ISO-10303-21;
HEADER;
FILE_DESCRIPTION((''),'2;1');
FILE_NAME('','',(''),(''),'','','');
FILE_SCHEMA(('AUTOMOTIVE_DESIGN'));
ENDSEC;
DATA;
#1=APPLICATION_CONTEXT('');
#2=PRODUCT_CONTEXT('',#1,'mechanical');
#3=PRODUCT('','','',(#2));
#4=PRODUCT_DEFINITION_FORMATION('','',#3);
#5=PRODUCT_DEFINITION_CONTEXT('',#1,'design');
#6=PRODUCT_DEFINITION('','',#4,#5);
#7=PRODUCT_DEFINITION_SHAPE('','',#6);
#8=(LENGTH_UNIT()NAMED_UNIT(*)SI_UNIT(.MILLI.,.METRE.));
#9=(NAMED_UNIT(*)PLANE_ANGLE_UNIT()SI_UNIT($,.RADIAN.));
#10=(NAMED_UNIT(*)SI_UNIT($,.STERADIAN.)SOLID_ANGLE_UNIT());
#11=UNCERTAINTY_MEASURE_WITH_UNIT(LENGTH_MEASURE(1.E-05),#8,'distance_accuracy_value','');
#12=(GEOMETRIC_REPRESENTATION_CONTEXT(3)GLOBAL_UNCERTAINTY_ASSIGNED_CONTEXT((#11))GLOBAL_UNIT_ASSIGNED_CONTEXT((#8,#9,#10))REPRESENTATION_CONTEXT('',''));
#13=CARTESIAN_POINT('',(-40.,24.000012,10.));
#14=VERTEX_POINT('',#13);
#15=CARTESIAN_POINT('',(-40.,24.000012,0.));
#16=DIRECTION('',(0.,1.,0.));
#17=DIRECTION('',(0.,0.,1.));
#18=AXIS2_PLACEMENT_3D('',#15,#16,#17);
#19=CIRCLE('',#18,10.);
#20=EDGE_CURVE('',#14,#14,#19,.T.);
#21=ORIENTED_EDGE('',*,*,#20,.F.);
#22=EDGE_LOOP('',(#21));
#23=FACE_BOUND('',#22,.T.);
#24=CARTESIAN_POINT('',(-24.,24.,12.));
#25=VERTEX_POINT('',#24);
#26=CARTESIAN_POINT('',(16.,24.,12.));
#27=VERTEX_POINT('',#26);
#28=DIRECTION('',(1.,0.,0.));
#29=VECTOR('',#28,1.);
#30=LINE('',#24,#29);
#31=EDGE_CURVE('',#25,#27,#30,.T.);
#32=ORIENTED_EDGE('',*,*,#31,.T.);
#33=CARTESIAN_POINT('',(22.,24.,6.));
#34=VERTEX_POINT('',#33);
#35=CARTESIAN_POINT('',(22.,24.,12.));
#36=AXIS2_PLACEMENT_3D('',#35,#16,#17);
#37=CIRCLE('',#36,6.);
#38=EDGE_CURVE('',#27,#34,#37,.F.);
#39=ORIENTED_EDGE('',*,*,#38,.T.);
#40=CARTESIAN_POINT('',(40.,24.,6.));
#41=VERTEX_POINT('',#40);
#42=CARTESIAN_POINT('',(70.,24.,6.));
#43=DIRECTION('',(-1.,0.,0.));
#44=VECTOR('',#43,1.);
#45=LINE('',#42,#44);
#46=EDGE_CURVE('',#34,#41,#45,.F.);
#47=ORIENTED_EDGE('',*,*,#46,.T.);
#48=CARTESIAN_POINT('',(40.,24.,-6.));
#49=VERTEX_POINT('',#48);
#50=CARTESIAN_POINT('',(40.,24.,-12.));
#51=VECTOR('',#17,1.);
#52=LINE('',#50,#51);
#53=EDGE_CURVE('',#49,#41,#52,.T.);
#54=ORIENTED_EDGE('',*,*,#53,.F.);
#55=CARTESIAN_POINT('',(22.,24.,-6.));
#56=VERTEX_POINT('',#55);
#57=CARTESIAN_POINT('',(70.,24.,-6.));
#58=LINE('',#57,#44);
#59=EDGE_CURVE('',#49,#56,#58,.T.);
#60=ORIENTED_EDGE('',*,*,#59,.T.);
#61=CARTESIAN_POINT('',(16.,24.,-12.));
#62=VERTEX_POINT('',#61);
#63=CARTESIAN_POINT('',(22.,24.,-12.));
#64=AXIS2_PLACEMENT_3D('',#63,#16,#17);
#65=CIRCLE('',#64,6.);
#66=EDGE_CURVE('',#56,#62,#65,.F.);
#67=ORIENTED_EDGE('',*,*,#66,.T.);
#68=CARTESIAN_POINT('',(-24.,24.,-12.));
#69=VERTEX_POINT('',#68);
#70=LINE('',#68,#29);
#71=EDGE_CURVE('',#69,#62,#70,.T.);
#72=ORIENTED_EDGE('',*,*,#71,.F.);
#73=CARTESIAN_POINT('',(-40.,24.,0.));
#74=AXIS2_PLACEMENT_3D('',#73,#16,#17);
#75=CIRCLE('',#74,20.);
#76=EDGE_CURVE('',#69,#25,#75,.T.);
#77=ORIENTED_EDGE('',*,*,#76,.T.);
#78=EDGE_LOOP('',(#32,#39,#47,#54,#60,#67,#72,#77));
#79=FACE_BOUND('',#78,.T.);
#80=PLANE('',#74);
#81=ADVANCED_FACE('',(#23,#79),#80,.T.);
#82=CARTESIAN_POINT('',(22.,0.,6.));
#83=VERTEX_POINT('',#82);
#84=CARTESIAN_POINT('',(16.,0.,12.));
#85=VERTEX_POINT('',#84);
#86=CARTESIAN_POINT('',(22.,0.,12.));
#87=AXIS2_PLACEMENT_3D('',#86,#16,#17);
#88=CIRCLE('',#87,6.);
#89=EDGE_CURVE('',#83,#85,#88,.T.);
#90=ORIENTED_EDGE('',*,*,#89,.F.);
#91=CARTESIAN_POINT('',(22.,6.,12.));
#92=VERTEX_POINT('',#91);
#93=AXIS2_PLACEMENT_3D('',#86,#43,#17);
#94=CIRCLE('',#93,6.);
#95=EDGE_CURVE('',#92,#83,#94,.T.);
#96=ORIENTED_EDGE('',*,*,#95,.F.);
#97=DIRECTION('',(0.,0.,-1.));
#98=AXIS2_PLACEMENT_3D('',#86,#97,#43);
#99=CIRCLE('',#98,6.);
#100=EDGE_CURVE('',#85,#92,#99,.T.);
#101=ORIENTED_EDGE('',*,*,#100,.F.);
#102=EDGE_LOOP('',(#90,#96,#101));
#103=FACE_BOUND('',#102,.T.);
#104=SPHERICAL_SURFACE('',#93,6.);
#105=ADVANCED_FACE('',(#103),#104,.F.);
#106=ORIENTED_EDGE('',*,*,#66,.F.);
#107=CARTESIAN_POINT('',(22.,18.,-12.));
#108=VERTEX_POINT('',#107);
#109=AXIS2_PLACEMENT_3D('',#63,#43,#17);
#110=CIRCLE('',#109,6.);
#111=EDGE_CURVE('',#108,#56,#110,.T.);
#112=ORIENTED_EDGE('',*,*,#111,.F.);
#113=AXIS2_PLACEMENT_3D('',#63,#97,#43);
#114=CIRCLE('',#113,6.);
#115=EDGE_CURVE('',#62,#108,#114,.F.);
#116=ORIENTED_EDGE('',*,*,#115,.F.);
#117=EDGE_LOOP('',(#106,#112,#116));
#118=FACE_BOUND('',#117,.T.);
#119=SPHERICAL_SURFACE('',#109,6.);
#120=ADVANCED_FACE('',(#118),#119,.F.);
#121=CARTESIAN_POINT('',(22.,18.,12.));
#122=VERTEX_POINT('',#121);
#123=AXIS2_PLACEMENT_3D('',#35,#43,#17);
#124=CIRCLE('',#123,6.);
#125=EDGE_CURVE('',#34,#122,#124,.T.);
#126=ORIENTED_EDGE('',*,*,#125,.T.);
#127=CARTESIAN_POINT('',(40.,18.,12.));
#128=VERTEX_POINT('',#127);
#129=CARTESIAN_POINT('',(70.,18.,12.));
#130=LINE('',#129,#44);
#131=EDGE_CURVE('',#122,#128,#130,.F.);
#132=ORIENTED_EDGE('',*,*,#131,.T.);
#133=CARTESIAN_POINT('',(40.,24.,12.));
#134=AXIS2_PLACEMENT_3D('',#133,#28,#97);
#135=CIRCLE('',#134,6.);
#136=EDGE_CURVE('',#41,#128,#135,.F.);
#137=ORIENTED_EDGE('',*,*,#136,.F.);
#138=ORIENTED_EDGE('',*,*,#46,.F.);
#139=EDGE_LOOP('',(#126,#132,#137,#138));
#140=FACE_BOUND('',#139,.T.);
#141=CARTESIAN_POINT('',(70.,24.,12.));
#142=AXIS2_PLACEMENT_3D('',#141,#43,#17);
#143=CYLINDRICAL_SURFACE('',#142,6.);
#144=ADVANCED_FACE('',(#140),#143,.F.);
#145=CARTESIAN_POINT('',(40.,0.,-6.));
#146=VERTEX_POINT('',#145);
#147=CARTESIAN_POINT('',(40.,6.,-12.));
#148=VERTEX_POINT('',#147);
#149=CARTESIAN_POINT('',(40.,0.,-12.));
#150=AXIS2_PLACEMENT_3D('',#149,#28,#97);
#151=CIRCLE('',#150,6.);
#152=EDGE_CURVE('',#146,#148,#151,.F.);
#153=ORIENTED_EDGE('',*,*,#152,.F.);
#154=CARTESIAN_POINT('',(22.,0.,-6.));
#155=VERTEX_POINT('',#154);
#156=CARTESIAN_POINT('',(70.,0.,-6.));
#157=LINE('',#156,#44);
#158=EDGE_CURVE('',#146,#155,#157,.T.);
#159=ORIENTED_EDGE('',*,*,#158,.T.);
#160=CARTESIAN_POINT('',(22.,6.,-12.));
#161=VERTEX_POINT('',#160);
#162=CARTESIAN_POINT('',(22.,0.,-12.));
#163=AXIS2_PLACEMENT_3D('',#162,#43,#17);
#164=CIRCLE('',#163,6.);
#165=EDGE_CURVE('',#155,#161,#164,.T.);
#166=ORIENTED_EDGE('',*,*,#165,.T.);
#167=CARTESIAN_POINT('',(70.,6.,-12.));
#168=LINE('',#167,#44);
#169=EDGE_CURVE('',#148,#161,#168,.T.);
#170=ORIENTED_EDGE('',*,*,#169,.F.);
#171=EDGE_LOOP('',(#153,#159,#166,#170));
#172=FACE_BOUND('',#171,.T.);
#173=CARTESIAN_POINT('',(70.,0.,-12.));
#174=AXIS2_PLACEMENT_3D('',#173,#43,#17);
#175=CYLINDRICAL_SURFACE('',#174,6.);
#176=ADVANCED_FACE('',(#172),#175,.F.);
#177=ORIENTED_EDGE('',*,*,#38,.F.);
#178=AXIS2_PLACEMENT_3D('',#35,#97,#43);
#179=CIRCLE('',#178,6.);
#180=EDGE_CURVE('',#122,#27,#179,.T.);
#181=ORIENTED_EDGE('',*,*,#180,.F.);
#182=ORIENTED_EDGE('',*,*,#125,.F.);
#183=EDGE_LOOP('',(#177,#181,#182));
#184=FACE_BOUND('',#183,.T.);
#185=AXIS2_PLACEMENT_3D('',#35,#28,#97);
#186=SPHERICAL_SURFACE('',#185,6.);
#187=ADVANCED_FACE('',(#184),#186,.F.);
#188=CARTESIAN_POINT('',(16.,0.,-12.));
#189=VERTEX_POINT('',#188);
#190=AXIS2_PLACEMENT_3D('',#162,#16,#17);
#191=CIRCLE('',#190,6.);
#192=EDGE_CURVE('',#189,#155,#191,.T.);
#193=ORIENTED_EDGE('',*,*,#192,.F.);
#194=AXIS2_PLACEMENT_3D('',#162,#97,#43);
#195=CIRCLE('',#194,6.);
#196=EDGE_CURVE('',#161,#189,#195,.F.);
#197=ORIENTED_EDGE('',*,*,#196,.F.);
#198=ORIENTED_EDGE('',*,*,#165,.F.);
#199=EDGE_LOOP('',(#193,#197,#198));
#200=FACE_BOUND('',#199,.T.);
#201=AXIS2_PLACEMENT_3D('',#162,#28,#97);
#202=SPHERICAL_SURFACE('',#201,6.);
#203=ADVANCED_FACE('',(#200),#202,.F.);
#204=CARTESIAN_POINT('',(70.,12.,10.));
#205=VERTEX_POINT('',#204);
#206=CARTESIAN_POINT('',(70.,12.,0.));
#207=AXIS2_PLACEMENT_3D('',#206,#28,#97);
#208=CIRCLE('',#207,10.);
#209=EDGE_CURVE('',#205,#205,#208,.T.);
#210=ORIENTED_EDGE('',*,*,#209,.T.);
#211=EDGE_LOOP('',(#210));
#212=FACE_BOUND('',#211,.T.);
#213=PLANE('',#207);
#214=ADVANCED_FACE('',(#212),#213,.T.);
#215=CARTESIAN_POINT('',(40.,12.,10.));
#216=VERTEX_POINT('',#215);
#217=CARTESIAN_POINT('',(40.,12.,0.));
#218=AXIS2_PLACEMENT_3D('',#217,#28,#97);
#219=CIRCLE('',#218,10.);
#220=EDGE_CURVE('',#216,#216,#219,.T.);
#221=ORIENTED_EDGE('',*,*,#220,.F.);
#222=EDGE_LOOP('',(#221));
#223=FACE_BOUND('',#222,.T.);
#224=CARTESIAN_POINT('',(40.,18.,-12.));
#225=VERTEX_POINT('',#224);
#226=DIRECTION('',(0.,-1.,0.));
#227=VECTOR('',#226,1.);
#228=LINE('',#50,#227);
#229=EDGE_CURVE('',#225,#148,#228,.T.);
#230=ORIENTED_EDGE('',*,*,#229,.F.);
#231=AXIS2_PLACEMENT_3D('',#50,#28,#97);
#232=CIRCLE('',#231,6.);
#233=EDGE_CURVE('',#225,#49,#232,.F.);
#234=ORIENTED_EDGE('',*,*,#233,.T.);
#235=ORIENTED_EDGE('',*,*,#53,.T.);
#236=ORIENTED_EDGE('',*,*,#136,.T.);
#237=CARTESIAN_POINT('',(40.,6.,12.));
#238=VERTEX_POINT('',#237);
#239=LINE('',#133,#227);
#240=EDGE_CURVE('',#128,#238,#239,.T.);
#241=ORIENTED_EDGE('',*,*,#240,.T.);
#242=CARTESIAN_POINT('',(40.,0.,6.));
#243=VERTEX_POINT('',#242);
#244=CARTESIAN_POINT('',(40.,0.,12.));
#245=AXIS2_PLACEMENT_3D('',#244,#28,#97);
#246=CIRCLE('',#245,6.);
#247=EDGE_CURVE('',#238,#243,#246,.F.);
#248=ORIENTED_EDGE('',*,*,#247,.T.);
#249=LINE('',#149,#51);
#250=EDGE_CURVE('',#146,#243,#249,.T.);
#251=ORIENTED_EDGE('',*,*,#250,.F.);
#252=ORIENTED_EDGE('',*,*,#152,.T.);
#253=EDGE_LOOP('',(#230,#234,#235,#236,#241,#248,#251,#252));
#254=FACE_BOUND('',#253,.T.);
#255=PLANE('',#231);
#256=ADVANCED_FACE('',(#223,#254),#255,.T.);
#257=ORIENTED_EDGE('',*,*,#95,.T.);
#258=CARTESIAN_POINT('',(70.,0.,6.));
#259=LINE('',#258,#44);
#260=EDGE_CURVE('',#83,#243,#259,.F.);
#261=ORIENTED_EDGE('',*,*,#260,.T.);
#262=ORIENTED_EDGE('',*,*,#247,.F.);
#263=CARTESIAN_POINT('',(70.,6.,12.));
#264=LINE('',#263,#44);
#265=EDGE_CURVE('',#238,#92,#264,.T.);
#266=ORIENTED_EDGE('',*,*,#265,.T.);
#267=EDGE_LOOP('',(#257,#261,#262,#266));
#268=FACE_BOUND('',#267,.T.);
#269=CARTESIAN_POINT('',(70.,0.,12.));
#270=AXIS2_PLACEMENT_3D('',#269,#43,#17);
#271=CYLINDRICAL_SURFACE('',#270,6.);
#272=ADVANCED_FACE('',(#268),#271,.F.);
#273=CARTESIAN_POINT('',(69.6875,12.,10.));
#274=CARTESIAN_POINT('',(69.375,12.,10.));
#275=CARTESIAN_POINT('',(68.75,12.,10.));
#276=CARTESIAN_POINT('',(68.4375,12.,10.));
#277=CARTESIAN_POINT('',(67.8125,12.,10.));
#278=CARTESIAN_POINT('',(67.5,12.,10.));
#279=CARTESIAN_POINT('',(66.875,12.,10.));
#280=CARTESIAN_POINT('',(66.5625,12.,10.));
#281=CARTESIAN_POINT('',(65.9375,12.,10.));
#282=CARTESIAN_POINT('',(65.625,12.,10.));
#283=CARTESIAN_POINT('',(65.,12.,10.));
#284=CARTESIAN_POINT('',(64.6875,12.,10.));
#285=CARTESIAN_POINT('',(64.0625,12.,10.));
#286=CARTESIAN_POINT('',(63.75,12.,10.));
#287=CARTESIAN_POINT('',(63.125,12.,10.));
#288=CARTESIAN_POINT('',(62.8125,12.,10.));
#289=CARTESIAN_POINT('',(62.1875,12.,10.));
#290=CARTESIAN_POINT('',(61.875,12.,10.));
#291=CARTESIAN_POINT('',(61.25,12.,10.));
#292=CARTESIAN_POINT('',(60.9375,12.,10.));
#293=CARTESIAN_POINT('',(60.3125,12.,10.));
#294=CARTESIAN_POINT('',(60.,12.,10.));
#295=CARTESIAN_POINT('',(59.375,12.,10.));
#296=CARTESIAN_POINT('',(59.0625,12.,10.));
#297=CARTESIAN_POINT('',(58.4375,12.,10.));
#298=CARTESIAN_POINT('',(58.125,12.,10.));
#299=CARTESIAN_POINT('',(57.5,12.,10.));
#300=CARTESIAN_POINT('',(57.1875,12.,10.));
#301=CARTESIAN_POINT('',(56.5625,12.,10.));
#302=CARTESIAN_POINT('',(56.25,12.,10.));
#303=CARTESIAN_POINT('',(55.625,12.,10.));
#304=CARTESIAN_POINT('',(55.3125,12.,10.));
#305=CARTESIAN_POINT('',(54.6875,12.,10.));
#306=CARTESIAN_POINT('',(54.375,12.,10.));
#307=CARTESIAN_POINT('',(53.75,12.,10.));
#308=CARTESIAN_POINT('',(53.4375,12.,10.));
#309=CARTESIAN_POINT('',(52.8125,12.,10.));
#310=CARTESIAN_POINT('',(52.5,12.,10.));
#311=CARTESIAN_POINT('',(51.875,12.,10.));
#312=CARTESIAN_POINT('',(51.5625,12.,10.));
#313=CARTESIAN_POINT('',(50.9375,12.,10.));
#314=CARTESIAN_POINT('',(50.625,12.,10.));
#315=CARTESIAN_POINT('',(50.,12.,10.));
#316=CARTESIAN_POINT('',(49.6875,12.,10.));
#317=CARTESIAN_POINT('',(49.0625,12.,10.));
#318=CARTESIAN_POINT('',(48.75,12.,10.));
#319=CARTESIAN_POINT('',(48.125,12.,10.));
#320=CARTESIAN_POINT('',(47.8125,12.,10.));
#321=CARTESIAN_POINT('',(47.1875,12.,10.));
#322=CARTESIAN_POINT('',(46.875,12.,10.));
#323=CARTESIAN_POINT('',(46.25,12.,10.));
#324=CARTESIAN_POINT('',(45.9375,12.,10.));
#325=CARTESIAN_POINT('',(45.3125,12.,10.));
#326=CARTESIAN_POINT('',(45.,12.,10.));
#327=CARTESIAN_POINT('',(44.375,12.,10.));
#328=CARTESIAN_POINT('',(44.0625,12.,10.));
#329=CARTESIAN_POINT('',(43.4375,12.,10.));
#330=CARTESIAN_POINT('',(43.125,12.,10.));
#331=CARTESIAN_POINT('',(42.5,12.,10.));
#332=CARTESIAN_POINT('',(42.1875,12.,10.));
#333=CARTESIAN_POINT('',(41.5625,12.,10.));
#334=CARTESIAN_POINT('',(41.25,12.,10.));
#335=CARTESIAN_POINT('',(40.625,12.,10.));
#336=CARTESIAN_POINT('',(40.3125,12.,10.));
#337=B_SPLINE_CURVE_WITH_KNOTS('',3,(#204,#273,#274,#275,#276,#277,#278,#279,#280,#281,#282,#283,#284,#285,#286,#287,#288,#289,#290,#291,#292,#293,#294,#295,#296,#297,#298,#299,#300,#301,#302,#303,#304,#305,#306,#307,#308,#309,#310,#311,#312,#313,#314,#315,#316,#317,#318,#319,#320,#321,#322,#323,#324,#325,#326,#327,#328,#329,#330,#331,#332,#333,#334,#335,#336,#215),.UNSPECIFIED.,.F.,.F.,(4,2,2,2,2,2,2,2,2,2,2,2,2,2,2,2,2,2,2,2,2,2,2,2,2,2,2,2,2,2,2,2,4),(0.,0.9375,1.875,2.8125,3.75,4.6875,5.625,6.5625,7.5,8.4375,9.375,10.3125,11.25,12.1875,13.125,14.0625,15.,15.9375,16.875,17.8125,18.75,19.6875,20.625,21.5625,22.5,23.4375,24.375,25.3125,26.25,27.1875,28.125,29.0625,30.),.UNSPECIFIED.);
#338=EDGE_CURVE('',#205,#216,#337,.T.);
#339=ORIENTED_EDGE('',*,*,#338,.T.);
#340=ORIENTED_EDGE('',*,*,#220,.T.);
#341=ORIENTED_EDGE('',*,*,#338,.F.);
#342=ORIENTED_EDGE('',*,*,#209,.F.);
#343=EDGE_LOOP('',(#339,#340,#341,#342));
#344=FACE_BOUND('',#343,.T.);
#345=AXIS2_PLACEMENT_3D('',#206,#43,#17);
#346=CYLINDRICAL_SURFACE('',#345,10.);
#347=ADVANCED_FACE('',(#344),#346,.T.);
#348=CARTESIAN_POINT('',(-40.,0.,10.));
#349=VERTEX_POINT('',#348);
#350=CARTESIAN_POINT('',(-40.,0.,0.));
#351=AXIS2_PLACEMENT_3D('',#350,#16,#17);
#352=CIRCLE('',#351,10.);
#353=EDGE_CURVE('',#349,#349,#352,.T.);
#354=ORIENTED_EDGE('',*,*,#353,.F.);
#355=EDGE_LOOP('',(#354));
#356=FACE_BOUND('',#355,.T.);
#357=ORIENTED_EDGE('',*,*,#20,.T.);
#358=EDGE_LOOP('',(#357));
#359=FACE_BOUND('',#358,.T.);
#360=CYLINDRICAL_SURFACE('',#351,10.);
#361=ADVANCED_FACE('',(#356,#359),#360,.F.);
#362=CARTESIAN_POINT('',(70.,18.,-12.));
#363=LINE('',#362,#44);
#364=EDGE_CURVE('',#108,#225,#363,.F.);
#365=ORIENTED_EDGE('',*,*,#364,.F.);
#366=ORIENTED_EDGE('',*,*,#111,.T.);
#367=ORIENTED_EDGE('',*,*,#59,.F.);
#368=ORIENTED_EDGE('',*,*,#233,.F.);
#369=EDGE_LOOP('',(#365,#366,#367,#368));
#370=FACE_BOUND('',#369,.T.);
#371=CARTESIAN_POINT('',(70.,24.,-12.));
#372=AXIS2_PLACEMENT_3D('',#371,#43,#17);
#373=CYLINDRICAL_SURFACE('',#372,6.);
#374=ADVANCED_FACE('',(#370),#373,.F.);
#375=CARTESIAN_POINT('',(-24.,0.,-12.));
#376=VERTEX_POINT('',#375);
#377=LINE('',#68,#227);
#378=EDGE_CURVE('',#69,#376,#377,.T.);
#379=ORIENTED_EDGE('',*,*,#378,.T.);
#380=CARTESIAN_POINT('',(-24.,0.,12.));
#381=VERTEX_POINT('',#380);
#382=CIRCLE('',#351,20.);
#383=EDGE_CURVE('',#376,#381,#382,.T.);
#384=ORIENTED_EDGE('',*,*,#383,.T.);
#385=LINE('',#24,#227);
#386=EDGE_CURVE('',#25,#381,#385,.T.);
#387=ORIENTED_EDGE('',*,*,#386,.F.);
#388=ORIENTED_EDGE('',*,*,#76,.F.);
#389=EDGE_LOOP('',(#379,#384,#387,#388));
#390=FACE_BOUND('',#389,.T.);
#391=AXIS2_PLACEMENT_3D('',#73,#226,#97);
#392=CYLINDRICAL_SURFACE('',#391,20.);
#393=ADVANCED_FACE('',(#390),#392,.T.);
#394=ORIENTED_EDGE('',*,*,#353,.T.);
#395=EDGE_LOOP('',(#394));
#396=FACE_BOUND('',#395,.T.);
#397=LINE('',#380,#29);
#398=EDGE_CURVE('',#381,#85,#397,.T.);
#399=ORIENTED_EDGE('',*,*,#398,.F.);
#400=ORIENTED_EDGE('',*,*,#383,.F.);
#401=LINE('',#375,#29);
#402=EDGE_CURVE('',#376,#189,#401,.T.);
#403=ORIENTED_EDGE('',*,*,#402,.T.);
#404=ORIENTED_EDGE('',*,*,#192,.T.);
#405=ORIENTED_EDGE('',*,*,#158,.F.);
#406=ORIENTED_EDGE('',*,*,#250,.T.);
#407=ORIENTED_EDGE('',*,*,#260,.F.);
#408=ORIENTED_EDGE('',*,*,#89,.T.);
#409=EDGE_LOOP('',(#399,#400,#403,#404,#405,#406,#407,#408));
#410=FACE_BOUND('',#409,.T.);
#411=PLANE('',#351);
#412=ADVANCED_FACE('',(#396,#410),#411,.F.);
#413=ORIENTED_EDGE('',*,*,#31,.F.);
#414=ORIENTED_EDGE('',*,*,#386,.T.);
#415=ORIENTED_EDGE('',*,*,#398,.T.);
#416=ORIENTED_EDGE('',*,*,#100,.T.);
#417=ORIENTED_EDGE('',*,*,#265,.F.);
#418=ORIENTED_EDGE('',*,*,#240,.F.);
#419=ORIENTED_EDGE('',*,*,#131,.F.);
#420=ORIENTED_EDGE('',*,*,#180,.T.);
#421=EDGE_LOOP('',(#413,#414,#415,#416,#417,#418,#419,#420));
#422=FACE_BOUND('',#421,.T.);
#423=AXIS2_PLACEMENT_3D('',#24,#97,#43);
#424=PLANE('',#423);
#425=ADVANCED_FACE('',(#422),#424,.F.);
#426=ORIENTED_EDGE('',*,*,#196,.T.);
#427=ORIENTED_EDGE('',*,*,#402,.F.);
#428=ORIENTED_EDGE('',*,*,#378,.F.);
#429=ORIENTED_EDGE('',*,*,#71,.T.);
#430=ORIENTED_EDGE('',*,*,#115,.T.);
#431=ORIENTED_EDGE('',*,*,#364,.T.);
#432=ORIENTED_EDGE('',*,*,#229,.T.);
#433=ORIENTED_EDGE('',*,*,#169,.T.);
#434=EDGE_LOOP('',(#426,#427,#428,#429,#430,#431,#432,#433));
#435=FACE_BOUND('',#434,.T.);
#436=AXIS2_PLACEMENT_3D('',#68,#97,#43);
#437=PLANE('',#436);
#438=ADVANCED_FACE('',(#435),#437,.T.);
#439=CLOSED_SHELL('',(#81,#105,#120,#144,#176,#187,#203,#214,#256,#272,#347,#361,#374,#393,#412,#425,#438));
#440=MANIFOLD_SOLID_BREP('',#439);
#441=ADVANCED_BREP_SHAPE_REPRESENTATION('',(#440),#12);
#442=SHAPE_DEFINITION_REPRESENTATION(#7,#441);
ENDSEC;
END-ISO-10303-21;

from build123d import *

# Parameters (mm, degrees)
BOSS_EXTRUDE1_DEPTH     = 24
SKETCH3_R               = 10
BOSS_EXTRUDE2_DEPTH     = 30
CUT_EXTRUDE1_DEPTH      = 77.655071587
CUT_EXTRUDE1_DEPTH_BACK = 77.655071587
SKETCH4_R               = 10
CUT_EXTRUDE2_DEPTH      = 105.76640683
CUT_EXTRUDE2_DEPTH_BACK = 24
SKETCH7_R               = 6
FILLET3_R               = 6


with BuildPart() as part:
    # Sketch2 → Boss-Extrude1 (new body)
    with BuildSketch(Plane(origin=(0, 0, 0), x_dir=(1, 0, 0), z_dir=(0, 1, 0))):
        with BuildLine():
            Line((-24, 12), (40, 12))
            Line((40, 12), (40, -12))
            Line((40, -12), (-24, -12))
            ThreePointArc((-24, -12), (-60, 0), (-24, 12))
        make_face()
    extrude(amount=BOSS_EXTRUDE1_DEPTH)

    # Sketch3 → Boss-Extrude2 (add)
    with BuildSketch(Plane(origin=(40, 0, 0), x_dir=(0, 0, -1), z_dir=(1, 0, 0))):
        with Locations((0, 12)):
            Circle(SKETCH3_R)
    extrude(amount=BOSS_EXTRUDE2_DEPTH)

    # Sketch4 → Cut-Extrude1 (cut, two sides: drawn at the far end of the back side and taken through both)
    with BuildSketch(Plane(origin=(0, 24, 0), x_dir=(1, 0, 0), z_dir=(0, 1, 0)).offset(-CUT_EXTRUDE1_DEPTH_BACK)):
        with Locations(Location((-40, 0, 0), (0, 0, 270))):
            Circle(SKETCH4_R)
    extrude(amount=CUT_EXTRUDE1_DEPTH + CUT_EXTRUDE1_DEPTH_BACK, mode=Mode.SUBTRACT)

    # Sketch7 → Cut-Extrude2 (cut, two sides: drawn at the far end of the back side and taken through both)
    with BuildSketch(Plane(origin=(40, 0, 0), x_dir=(0, 0, -1), z_dir=(1, 0, 0)).offset(-CUT_EXTRUDE2_DEPTH_BACK)):
        with Locations((-12, 24)):
            Circle(SKETCH7_R)
        with Locations((12, 24)):
            Circle(SKETCH7_R)
        with Locations((12, 0)):
            Circle(SKETCH7_R)
        with Locations((-12, 0)):
            Circle(SKETCH7_R)
    extrude(amount=CUT_EXTRUDE2_DEPTH + CUT_EXTRUDE2_DEPTH_BACK, mode=Mode.SUBTRACT)

    # Fillet3
    fillet3_edges = [part.edges().sort_by_distance(p)[0] for p in [
        (16, 4.242640687, -7.757359313),
        (16, 4.242640687, 7.757359313),
        (16, 19.757359313, -7.757359313),
        (16, 19.757359313, 7.757359313),
    ]]
    fillet(fillet3_edges, radius=FILLET3_R - 0.0001)  # a hair under: the kernel refuses the full size


solid = part.part
